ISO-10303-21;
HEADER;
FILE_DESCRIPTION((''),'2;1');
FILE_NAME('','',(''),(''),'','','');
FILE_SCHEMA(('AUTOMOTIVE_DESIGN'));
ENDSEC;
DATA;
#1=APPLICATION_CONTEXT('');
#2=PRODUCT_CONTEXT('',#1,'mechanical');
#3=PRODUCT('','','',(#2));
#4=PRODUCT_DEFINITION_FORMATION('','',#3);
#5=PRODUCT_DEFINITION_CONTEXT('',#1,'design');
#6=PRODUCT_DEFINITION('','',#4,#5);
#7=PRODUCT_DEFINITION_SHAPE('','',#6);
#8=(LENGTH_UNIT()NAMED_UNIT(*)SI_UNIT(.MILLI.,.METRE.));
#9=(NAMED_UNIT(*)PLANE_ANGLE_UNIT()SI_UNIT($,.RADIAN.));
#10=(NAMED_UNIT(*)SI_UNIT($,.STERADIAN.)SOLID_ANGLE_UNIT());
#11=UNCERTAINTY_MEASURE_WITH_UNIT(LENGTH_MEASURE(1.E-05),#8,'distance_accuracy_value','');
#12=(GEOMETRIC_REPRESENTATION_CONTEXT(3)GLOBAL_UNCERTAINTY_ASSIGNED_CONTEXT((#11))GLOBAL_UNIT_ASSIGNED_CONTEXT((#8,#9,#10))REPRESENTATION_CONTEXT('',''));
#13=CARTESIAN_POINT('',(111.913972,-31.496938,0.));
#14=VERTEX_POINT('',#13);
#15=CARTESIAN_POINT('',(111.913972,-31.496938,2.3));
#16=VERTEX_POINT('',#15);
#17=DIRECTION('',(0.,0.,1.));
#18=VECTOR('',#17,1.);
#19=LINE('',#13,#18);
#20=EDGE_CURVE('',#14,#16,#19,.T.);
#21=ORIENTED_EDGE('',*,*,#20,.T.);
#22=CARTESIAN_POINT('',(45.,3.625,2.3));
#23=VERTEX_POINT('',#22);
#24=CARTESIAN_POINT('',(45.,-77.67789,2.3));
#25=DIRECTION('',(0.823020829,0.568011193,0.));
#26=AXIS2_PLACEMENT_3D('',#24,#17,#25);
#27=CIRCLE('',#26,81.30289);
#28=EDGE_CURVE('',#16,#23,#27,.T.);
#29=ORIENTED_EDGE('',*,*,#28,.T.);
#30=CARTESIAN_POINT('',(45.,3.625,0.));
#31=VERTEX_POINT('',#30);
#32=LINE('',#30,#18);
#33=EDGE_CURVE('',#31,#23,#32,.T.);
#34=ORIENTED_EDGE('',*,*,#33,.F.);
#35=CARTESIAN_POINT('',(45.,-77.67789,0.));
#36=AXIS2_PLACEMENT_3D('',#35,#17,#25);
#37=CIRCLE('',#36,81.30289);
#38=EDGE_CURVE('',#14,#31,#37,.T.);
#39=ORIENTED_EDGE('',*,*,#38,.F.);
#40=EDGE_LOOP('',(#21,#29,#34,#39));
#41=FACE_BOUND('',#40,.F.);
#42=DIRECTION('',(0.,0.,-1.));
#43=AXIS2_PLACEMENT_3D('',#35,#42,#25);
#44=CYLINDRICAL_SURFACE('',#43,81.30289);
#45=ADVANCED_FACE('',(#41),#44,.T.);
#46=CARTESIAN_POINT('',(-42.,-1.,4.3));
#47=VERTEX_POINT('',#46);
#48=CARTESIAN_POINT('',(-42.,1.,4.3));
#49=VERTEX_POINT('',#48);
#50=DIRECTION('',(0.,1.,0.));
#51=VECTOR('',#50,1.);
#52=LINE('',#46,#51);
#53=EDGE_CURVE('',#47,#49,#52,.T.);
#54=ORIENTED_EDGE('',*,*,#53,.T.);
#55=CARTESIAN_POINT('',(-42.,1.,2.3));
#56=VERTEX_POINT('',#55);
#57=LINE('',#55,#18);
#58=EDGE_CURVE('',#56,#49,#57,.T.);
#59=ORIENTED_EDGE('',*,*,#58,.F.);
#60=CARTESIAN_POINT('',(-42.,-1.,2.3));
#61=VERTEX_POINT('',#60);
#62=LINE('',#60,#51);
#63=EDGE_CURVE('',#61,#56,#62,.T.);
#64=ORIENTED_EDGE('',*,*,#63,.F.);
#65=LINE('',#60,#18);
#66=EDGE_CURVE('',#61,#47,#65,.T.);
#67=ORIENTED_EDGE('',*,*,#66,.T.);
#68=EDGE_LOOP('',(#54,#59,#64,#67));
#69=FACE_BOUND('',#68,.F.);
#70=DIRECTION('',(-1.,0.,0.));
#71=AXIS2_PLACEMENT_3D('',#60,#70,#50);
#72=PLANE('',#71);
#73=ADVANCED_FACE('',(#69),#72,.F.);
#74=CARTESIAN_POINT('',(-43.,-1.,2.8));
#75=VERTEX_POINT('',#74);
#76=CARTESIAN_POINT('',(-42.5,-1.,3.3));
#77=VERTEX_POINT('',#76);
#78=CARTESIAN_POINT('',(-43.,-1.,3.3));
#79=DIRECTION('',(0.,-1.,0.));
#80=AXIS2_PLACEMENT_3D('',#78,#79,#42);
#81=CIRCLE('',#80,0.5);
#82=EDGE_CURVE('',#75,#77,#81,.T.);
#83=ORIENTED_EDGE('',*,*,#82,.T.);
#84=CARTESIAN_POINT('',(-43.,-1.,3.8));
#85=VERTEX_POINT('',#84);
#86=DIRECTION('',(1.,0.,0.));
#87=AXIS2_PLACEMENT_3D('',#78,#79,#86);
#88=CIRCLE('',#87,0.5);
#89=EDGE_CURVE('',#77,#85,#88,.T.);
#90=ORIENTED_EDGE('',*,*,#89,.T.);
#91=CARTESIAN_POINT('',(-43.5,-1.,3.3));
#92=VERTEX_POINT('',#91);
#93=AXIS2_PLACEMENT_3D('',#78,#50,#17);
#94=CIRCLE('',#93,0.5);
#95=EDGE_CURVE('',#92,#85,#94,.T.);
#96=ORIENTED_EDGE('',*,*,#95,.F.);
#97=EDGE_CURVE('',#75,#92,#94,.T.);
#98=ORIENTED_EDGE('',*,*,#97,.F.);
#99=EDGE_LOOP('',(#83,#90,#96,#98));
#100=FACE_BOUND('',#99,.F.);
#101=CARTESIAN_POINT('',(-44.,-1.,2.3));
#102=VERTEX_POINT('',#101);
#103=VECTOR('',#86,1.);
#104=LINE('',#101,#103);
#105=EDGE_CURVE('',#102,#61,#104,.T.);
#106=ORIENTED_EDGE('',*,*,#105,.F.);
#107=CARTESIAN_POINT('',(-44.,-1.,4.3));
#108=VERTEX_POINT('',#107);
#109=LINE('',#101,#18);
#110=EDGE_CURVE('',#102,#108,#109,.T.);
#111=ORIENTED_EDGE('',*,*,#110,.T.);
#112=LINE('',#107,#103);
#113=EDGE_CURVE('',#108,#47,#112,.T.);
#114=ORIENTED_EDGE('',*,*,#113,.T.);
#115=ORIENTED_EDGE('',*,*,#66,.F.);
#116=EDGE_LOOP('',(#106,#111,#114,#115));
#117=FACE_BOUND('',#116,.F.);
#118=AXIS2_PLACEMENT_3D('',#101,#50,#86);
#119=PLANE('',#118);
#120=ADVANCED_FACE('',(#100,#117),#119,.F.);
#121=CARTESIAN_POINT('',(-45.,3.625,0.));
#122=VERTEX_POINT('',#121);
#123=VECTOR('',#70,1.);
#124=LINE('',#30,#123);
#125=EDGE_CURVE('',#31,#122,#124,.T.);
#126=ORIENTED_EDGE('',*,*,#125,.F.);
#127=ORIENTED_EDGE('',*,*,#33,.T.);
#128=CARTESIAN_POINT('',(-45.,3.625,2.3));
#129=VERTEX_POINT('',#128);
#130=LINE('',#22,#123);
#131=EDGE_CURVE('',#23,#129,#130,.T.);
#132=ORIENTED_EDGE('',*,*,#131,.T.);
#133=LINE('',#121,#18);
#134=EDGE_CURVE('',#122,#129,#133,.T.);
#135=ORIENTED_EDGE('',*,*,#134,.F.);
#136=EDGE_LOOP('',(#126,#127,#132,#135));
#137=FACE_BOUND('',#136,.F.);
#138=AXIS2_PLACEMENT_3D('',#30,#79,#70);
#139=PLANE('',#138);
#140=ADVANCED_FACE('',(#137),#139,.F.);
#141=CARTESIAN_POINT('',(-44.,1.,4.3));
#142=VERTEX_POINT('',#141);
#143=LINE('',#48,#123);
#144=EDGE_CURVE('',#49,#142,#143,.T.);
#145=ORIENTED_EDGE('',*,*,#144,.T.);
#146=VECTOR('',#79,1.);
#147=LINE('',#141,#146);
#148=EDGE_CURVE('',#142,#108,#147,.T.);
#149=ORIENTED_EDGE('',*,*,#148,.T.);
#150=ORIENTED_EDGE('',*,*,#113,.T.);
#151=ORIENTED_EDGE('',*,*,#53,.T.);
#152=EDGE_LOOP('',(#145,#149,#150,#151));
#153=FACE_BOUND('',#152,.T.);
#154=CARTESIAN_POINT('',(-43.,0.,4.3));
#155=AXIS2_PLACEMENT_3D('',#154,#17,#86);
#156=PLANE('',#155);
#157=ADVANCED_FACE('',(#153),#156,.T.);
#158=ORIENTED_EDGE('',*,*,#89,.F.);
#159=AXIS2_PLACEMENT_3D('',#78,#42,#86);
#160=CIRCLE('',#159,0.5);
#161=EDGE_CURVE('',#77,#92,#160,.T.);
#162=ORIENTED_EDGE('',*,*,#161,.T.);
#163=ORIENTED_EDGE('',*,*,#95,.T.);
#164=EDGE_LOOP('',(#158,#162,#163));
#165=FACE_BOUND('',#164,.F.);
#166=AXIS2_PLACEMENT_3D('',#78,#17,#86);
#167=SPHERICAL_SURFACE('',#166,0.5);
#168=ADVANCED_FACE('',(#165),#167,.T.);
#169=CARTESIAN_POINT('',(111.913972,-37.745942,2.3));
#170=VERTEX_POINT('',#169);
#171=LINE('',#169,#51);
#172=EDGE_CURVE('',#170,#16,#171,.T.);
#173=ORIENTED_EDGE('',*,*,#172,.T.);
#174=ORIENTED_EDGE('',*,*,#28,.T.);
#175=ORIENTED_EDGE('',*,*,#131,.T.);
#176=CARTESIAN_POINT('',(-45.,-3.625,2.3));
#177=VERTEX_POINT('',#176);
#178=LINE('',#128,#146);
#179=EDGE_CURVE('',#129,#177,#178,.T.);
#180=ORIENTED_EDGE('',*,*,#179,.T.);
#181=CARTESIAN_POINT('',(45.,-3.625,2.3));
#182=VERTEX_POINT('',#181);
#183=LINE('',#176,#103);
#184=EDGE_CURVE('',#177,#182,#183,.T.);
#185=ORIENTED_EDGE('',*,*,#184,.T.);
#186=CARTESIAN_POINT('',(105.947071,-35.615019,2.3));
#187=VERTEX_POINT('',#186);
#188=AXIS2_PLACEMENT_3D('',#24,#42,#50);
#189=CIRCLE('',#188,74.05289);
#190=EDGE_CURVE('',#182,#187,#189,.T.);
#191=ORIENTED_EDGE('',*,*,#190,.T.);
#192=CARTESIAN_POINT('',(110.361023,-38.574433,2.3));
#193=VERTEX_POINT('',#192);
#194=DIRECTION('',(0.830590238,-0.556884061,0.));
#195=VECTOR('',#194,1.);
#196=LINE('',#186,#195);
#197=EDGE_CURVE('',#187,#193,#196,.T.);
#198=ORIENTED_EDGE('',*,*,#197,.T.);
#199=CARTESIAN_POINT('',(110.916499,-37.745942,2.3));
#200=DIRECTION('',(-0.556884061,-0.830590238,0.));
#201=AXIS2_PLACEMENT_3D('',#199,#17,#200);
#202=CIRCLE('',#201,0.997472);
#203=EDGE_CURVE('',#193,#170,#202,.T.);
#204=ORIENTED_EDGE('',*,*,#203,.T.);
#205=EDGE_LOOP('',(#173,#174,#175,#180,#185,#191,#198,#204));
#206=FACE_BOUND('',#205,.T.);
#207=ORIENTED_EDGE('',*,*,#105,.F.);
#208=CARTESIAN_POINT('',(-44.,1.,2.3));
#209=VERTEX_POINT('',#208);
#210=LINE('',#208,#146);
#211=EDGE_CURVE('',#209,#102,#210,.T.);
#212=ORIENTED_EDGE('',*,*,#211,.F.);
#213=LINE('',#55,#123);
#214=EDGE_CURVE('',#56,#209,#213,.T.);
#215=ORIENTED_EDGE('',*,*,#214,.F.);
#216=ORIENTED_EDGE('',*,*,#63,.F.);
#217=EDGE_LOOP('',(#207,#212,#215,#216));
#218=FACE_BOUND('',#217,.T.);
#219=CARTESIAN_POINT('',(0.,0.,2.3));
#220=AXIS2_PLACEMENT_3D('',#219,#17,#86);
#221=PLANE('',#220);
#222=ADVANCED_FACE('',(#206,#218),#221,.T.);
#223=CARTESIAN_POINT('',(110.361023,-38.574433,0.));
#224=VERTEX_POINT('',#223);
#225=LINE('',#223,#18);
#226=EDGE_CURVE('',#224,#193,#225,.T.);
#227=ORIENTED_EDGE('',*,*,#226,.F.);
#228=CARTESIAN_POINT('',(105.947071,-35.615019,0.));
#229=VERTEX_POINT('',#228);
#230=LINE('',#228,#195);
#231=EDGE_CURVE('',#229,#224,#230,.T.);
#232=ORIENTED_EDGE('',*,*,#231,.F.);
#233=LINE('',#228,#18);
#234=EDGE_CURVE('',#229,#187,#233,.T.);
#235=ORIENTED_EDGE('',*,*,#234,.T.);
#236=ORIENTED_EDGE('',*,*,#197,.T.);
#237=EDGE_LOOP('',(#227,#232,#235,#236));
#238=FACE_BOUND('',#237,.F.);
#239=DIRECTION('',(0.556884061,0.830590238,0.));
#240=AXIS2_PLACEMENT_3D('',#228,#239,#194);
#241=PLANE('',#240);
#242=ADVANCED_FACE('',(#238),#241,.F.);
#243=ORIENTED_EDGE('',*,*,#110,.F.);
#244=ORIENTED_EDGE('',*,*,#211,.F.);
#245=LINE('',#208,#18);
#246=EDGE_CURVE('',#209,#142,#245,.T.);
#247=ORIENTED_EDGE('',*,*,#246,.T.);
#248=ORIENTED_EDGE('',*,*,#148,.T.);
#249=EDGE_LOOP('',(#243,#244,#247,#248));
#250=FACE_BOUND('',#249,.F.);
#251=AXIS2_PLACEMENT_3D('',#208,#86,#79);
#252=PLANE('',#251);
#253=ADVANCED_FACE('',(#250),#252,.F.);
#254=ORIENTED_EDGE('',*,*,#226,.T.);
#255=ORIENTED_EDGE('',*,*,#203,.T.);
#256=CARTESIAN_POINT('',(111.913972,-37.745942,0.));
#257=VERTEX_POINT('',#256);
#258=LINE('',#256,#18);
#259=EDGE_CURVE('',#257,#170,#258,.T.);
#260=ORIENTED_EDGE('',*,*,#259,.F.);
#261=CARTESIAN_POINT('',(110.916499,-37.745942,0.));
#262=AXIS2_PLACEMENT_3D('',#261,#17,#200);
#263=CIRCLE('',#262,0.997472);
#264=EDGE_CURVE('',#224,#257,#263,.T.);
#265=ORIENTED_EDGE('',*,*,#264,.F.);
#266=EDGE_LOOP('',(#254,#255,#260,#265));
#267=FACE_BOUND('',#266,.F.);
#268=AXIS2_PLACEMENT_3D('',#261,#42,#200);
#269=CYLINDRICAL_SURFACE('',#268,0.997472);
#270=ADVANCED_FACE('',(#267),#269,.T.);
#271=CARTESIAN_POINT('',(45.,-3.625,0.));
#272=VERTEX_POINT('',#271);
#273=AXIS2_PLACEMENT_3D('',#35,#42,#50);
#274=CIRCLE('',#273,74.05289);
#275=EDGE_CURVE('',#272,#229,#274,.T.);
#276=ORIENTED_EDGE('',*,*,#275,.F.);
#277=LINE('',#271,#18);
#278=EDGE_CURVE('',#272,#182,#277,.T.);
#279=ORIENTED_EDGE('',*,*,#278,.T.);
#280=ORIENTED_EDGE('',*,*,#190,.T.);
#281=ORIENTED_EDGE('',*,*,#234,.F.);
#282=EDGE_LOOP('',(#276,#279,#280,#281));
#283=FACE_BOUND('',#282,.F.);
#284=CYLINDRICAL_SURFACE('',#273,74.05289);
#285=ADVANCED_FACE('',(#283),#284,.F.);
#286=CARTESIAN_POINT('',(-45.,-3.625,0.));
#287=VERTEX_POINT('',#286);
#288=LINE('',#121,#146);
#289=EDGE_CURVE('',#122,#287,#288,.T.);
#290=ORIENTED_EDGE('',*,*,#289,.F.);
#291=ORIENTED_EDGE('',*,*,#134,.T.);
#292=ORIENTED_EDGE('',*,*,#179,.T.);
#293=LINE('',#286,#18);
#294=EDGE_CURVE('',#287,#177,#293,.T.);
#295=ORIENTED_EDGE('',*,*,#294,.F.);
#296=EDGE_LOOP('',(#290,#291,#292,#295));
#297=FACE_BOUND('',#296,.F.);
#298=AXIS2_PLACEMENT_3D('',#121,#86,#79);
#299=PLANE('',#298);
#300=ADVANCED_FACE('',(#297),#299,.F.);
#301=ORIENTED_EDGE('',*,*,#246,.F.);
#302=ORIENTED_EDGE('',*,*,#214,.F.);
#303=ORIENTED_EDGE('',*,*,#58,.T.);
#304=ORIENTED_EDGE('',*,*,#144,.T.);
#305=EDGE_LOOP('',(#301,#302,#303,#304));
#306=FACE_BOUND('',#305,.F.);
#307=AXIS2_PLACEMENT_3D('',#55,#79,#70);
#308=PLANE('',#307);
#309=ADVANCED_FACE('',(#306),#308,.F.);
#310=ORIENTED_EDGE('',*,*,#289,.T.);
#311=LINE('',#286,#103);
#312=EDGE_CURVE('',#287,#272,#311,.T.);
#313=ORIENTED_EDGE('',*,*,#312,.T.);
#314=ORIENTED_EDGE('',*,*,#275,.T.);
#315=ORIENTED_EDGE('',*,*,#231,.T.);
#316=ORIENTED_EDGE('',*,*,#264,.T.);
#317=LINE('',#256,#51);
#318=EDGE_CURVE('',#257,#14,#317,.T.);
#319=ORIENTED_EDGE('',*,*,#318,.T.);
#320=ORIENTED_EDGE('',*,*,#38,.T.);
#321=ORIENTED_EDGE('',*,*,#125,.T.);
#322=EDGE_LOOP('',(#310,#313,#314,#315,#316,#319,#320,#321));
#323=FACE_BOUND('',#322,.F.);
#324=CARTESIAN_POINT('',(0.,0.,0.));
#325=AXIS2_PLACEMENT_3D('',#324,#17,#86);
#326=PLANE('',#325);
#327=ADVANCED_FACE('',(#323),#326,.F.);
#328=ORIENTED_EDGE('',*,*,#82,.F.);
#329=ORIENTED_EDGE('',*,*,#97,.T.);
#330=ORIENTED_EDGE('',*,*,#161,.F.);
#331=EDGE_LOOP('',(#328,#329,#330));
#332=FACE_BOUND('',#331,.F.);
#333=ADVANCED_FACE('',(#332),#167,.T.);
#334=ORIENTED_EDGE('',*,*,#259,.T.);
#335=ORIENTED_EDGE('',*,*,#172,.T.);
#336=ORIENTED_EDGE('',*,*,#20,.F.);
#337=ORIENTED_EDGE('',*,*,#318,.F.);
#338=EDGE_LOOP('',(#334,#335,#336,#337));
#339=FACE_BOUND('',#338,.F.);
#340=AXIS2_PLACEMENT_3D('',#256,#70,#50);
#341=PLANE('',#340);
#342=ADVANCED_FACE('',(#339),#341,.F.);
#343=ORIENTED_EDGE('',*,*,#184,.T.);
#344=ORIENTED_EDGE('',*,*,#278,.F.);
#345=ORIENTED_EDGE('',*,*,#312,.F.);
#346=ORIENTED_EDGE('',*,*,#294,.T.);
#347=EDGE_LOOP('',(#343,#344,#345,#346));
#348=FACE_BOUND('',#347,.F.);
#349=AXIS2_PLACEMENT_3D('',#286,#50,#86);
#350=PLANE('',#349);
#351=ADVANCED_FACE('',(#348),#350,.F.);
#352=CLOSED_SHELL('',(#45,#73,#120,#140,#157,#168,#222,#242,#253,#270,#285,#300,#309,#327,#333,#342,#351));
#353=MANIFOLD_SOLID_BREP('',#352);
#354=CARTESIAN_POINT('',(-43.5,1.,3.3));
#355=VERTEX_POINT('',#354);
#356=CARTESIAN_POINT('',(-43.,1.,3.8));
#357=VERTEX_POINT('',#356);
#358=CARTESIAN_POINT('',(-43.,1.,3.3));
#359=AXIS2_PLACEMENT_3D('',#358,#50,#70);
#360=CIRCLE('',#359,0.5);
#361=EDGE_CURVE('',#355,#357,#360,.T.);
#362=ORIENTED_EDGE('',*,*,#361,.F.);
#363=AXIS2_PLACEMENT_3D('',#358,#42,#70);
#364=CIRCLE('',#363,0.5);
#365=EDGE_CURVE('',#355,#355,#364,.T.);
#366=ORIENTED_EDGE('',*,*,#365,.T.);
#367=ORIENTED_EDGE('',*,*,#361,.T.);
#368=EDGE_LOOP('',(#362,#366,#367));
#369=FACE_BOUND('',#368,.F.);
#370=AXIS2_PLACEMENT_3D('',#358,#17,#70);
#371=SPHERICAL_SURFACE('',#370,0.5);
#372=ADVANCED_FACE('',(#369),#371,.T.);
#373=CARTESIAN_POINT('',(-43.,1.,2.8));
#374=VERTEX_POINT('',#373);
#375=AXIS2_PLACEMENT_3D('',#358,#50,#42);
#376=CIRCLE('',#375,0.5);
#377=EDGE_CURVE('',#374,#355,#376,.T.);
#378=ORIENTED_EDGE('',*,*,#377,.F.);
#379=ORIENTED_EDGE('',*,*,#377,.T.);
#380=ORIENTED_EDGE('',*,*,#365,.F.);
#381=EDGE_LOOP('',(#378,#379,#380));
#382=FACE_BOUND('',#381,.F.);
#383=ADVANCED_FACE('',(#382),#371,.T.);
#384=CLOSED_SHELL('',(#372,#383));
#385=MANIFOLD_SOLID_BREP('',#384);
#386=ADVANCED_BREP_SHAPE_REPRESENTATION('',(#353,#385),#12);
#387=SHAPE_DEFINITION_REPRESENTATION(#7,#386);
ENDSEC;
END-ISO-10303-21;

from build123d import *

# Parameters (mm, degrees)
F1_DEPTH = 2.3
F3_DEPTH = 2


with BuildPart() as f1:
    # F0 (on Top) → F1 (new body)
    with BuildSketch(Plane.XY):
        Polygon((45, 3.625), (-45, 3.625), (-45, 0), (-45, -3.625), (45, -3.625), align=None)
        Polygon((-44, -1), (-44, 0), (-44, 1), (-42, 1), (-42, -1), align=None, mode=Mode.SUBTRACT)
        with BuildLine():
            ThreePointArc((111.9139716029, -31.496938318), (82.7856789898, -5.6889854515), (45, 3.625))
            Line((45, 3.625), (45, -3.625))
            ThreePointArc((45, -3.625), (79.4162271285, -12.1084320129), (105.947070592, -35.615019464))
            Line((105.947070592, -35.615019464), (110.3610228539, -38.574432601))
            ThreePointArc((110.3610228539, -38.574432601), (111.3860089549, -38.6260052928), (111.9139716029, -37.7459418336))
            Line((111.9139716029, -37.7459418336), (111.9139716029, -31.496938318))
        make_face()
        Polygon((-44, 1), (-44, 0), (-44, -1), (-42, -1), (-42, 1), align=None)
    extrude(amount=F1_DEPTH)

    # F2 (on face) → F3 (join)
    with BuildSketch(Plane.XY.offset(2.3)):
        Polygon((-44, 1), (-44, 0), (-44, -1), (-42, -1), (-42, 1), align=None)
    extrude(amount=F3_DEPTH)

    # F6 (on face) → F7 (revolve)
    with BuildSketch(Plane.XZ.offset(1)):
        with BuildLine():
            ThreePointArc((-42.5, 3.3), (-42.6464466094, 3.6535533906), (-43, 3.8))
            Line((-43, 3.8), (-43, 3.3))
            Line((-43, 3.3), (-42.5, 3.3))
        make_face()
        with BuildLine():
            Line((-42.5, 3.3), (-43, 3.3))
            Line((-43, 3.3), (-43, 2.8))
            ThreePointArc((-43, 2.8), (-42.6464466094, 2.9464466094), (-42.5, 3.3))
        make_face()
    revolve(axis=Axis((-43, -1, 3.3), (0, 0, -1)))


with BuildPart() as f5:
    # F4 (on face) → F5 (revolve)
    with BuildSketch(Plane(origin=(0, 1, 0), x_dir=(-1, 0, 0), z_dir=(0, 1, 0))):
        with BuildLine():
            Line((43, 3.3), (43.5, 3.3))
            ThreePointArc((43.5, 3.3), (43.3535533906, 3.6535533906), (43, 3.8))
            Line((43, 3.8), (43, 3.3))
        make_face()
        with BuildLine():
            ThreePointArc((43, 2.8), (43.3535533906, 2.9464466094), (43.5, 3.3))
            Line((43.5, 3.3), (43, 3.3))
            Line((43, 3.3), (43, 2.8))
        make_face()
    revolve(axis=Axis((-43, 1, 3.3), (0, 0, -1)))


solid = Compound([f1.part, f5.part])
